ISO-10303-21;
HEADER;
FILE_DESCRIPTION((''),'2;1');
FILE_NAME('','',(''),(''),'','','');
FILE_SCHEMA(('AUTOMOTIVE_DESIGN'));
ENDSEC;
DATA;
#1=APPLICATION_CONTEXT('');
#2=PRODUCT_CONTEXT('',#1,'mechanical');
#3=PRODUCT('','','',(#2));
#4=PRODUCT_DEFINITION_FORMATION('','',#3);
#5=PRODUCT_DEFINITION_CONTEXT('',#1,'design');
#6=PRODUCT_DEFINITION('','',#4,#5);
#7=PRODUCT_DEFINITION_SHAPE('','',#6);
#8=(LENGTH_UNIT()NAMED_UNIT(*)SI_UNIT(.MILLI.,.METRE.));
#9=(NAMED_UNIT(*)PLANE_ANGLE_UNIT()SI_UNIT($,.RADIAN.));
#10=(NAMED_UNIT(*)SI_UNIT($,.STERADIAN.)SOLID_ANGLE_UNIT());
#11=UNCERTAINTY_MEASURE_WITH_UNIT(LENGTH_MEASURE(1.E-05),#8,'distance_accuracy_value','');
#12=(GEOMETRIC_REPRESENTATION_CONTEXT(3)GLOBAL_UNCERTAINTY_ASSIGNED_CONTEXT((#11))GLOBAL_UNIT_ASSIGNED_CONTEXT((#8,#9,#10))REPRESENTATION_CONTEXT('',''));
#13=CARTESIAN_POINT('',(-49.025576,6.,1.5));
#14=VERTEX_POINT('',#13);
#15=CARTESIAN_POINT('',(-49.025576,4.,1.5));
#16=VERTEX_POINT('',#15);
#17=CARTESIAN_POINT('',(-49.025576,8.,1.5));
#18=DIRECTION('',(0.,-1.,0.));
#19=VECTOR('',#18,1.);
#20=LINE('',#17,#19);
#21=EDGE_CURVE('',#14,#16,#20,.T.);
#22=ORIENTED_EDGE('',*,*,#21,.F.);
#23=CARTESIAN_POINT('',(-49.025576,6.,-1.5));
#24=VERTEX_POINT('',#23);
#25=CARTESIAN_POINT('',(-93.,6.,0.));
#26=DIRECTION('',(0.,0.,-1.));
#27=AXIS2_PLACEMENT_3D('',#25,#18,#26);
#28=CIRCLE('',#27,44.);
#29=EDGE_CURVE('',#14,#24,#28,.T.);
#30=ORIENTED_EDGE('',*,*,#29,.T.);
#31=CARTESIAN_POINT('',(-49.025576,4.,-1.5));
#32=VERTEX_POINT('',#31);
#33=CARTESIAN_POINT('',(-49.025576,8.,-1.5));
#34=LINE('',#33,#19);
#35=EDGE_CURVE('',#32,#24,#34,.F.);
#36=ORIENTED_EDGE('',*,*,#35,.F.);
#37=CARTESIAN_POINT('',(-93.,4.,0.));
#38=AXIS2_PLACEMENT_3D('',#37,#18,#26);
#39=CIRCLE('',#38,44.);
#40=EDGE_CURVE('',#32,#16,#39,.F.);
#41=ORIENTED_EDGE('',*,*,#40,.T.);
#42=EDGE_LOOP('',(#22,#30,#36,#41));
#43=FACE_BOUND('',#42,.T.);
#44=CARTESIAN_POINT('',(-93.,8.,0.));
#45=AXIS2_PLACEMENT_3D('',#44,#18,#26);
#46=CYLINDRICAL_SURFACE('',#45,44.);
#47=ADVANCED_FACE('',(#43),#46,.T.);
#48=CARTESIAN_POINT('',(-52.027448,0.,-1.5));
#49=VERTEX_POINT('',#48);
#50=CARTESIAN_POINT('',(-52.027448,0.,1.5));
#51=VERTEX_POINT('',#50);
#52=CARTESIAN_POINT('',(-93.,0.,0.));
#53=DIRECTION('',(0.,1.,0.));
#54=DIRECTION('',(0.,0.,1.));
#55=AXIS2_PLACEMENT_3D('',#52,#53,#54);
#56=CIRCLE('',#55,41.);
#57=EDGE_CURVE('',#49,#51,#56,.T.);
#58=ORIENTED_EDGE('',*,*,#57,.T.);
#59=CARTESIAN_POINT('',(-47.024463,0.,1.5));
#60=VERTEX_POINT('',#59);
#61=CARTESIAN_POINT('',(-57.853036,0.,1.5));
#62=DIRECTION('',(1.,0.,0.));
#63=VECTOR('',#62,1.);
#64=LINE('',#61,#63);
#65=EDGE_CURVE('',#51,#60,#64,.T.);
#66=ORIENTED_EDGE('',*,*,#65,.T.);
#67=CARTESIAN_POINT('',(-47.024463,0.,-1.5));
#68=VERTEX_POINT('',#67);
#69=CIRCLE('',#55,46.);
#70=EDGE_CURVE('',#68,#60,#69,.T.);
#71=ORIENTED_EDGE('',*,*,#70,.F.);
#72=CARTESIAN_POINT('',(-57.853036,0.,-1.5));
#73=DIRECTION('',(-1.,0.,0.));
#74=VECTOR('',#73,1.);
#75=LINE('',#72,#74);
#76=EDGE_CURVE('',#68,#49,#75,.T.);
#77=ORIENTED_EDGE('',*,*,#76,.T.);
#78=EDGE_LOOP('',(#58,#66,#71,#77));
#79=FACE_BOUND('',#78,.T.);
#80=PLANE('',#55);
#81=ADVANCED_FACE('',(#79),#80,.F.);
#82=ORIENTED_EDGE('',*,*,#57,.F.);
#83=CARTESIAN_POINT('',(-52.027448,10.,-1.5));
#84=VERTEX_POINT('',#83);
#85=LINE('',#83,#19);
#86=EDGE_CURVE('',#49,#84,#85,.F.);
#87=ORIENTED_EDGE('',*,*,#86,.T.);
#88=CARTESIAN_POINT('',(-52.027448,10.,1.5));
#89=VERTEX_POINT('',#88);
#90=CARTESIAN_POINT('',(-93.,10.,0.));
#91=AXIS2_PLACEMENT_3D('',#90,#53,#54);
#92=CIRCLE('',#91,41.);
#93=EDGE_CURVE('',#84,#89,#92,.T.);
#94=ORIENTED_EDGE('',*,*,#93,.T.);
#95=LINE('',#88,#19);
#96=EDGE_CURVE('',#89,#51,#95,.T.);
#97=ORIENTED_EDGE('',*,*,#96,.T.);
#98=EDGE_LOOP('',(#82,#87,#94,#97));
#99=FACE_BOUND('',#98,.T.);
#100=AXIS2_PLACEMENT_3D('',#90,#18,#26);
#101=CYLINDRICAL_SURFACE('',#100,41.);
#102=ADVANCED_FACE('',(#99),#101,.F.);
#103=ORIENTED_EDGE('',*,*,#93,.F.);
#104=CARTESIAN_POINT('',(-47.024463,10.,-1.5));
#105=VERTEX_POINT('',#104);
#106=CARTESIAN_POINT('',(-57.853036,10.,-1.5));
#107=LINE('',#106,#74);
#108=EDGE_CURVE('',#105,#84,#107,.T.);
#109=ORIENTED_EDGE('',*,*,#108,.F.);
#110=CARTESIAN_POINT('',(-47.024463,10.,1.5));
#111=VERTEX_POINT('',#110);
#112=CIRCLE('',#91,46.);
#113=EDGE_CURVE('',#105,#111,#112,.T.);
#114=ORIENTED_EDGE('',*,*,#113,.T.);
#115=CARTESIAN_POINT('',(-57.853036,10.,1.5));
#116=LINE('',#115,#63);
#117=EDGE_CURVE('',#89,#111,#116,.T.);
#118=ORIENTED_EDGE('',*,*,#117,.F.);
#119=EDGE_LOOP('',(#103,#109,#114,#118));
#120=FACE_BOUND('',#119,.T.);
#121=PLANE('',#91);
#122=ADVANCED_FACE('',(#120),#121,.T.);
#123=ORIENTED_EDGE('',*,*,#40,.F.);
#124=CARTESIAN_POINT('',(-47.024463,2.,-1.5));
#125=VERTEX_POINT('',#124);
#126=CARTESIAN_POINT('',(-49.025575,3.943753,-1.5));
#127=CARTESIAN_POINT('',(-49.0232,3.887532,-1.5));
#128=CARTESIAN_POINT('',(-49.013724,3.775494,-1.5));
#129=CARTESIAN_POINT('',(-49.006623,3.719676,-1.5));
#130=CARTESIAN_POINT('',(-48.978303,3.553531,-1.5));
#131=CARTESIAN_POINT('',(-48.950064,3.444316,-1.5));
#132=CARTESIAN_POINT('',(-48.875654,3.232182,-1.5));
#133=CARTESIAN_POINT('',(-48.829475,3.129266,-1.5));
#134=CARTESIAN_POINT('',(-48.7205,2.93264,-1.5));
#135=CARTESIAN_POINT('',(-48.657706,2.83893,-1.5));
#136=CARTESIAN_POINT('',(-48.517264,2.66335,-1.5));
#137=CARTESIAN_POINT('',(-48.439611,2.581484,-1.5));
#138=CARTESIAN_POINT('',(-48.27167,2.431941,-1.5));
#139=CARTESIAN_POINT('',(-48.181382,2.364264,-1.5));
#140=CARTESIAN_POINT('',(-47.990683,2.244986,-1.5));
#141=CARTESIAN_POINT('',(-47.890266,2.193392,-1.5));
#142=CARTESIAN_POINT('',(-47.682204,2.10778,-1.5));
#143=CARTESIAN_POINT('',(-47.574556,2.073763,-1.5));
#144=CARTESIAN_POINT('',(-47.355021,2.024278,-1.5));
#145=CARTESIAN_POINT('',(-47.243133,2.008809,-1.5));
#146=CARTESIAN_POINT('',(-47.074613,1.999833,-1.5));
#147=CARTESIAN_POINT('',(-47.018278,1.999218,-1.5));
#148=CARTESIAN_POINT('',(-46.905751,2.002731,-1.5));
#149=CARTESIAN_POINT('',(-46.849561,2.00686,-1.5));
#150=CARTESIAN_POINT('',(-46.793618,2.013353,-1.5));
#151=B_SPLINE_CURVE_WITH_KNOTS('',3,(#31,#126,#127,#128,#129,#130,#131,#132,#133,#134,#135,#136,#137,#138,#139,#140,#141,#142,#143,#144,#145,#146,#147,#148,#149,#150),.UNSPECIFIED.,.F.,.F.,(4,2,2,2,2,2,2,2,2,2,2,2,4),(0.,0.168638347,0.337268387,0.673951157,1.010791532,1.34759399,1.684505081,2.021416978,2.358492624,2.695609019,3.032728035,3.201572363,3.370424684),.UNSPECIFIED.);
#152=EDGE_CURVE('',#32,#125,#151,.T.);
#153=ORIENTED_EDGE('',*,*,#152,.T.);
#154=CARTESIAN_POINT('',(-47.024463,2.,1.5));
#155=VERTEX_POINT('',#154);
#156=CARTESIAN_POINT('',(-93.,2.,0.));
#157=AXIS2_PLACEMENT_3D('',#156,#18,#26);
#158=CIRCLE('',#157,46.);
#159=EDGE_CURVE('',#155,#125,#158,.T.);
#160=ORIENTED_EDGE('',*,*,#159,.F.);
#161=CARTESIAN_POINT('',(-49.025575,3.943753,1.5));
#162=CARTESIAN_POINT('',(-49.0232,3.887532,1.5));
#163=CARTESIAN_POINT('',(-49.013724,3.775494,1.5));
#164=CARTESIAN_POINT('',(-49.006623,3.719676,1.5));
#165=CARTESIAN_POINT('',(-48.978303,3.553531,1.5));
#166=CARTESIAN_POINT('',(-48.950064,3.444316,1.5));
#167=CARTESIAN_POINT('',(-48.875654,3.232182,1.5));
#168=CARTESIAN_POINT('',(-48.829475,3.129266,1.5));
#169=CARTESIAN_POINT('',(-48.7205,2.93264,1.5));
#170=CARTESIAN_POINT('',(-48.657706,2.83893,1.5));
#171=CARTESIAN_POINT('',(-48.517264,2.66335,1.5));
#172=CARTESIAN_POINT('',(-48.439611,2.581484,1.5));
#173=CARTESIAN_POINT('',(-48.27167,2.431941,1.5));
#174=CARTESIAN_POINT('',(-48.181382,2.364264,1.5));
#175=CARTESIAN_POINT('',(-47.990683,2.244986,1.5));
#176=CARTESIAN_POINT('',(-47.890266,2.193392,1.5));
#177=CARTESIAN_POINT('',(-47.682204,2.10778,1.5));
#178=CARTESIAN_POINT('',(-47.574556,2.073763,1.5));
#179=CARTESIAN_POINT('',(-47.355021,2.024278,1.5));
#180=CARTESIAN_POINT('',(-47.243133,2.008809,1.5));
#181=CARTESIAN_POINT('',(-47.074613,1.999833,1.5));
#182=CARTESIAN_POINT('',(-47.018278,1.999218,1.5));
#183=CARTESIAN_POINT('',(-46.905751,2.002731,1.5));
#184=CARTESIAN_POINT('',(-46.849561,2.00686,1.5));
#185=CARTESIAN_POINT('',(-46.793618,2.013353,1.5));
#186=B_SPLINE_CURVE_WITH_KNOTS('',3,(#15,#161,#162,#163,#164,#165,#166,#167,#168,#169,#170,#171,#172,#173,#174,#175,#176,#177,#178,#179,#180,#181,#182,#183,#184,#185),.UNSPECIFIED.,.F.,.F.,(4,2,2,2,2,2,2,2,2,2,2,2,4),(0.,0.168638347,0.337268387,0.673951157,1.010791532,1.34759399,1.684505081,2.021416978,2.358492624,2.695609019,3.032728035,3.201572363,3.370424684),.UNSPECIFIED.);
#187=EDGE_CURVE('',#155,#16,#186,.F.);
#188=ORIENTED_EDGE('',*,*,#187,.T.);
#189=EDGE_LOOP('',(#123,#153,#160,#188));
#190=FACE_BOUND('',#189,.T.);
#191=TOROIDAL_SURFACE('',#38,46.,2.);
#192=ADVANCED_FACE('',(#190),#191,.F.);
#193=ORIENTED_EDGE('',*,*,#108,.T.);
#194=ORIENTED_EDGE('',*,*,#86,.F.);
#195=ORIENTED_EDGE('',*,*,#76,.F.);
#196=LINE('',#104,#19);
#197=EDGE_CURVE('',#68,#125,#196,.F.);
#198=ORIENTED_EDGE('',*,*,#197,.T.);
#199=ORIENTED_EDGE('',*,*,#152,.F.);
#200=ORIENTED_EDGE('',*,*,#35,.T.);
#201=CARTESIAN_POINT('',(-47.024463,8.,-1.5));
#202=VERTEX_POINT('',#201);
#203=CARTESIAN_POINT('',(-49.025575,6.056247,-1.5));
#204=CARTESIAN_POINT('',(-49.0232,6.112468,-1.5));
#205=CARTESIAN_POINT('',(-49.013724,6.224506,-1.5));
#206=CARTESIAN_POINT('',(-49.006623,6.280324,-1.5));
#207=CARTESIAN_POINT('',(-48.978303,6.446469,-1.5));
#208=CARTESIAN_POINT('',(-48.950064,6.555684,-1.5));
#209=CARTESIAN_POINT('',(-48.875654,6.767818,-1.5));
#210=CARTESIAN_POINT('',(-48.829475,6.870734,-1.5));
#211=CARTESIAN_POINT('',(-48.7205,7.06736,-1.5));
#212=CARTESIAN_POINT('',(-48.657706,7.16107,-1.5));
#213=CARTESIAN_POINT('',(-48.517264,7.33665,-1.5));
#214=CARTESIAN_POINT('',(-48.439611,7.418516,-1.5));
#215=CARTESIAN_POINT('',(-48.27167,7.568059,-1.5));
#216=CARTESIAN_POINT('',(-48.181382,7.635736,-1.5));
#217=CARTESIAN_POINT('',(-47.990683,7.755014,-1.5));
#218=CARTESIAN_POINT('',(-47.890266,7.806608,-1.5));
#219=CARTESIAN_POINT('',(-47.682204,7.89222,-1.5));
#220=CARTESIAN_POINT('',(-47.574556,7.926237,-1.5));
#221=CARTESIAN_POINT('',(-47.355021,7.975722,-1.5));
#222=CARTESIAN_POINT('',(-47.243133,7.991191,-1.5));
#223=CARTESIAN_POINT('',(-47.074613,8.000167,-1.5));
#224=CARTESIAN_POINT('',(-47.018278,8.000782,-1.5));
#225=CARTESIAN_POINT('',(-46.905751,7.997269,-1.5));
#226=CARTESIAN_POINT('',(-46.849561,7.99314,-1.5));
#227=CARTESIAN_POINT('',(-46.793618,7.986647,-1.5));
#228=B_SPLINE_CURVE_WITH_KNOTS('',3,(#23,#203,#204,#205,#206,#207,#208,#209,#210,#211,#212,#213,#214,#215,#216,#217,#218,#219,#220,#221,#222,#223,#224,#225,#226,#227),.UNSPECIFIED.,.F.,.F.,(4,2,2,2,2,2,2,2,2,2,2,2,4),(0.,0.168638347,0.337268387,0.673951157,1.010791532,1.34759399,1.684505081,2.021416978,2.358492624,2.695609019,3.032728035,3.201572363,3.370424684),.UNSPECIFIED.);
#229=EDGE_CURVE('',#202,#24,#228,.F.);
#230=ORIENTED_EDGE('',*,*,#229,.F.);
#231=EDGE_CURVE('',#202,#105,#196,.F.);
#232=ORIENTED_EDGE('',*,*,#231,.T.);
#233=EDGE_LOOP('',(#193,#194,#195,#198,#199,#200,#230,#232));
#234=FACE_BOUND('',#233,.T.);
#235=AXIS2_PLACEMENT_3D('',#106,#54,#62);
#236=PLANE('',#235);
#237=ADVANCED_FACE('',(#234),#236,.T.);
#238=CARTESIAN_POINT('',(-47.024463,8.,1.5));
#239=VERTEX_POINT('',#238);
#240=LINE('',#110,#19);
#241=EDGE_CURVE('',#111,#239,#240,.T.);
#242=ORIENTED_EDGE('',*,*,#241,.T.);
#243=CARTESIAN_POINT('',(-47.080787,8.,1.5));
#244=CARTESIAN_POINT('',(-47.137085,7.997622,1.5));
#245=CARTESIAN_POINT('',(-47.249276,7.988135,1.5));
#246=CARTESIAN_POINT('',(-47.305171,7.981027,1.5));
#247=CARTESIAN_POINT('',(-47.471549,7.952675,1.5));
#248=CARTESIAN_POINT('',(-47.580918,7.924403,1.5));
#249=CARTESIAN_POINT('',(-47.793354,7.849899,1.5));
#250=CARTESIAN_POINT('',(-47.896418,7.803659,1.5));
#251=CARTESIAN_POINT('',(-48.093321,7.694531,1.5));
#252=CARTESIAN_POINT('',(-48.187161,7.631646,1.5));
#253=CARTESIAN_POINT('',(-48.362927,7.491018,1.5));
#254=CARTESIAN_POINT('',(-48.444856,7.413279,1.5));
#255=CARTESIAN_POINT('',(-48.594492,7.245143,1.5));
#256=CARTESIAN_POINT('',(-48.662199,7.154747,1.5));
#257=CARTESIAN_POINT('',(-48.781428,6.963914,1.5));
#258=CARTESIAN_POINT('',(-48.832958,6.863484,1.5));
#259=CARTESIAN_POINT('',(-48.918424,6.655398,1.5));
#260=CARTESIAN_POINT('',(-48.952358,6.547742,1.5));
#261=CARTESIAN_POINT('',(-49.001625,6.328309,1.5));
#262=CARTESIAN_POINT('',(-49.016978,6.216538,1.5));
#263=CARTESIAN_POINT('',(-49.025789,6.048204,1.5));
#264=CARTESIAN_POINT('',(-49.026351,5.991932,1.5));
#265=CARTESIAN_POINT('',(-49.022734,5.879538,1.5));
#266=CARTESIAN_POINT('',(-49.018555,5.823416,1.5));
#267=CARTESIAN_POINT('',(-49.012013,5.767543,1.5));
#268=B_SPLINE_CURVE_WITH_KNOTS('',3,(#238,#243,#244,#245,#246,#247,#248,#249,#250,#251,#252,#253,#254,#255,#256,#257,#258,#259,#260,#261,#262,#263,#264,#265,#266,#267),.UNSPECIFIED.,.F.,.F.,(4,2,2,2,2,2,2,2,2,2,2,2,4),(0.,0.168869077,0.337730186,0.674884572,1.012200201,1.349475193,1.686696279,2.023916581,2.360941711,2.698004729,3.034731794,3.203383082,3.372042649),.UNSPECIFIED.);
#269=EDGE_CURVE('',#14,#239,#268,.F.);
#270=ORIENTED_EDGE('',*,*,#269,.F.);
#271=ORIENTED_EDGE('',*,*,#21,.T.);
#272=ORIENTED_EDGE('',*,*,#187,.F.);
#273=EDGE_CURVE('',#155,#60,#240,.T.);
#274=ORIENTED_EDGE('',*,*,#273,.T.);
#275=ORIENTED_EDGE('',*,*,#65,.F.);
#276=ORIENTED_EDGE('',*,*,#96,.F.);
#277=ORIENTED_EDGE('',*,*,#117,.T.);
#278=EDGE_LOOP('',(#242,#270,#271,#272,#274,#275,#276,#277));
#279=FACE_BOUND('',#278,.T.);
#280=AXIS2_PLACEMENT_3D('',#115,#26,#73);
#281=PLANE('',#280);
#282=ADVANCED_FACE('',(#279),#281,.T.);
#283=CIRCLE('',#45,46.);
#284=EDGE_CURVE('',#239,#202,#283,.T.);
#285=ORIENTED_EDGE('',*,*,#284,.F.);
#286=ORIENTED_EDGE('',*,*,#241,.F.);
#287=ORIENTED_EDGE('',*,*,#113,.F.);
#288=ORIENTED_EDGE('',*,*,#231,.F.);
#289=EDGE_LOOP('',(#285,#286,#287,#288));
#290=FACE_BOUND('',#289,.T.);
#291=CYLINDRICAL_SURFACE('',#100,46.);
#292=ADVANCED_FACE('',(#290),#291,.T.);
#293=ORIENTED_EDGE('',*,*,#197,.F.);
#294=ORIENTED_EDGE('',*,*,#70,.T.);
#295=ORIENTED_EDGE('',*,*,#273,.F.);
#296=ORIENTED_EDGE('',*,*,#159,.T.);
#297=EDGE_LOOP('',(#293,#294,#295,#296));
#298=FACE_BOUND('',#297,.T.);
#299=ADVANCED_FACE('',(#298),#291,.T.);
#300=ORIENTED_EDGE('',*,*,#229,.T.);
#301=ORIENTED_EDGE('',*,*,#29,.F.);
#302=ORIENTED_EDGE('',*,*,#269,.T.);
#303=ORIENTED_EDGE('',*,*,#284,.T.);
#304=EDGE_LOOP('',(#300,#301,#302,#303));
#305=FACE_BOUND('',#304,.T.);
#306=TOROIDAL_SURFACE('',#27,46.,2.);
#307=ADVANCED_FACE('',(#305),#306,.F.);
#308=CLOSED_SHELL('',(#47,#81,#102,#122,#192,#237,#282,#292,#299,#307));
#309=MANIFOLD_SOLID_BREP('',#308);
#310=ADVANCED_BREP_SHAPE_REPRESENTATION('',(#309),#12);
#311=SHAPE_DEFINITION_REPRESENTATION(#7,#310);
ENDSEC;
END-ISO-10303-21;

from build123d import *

# Parameters (mm, degrees)
SKETCH1_R           = 46
SKETCH1_R_2         = 41
BOSS_EXTRUDE1_DEPTH = 10
SKETCH2_W           = 13.706072516
SKETCH2_H           = 3
CUT_EXTRUDE2_DEPTH  = 147.754897704
SKETCH3_R           = 47
SKETCH3_R_2         = 44
CUT_EXTRUDE3_DEPTH  = 6
FILLET1_R           = 2
FILLET2_R           = 2


with BuildPart() as part:
    # Sketch1 → Boss-Extrude1 (new body)
    with BuildSketch(Plane(origin=(0, 0, 0), x_dir=(1, 0, 0), z_dir=(0, 1, 0))):
        with Locations(Location((-93, 0, 0), (0, 0, 270))):
            Circle(SKETCH1_R)
        with Locations(Location((-93, 0, 0), (0, 0, 270))):
            Circle(SKETCH1_R_2, mode=Mode.SUBTRACT)
    extrude(amount=BOSS_EXTRUDE1_DEPTH)

    # Sketch2 → Cut-Extrude2 (cut, through all)
    with BuildSketch(Plane(origin=(0, 0, 0), x_dir=(1, 0, 0), z_dir=(0, 1, 0))):
        with Locations((-51, 0)):
            Rectangle(SKETCH2_W, SKETCH2_H)
    extrude(amount=CUT_EXTRUDE2_DEPTH, mode=Mode.SUBTRACT)

    # Sketch3 → Cut-Extrude3 (cut)
    with BuildSketch(Plane(origin=(0, 2, 0), x_dir=(-1, 0, 0), z_dir=(0, -1, 0))):
        with Locations((93, 0)):
            Circle(SKETCH3_R)
        with Locations((93, 0)):
            Circle(SKETCH3_R_2, mode=Mode.SUBTRACT)
    extrude(amount=-CUT_EXTRUDE3_DEPTH, mode=Mode.SUBTRACT)

    # Fillet1
    fillet1_edges = [part.edges().sort_by_distance(p)[0] for p in [
        (-93.750109011, 8, 43.993605632),
    ]]
    fillet(fillet1_edges, radius=FILLET1_R - 0.0001)  # a hair under: the kernel refuses the full size

    # Fillet2
    fillet2_edges = [part.edges().sort_by_distance(p)[0] for p in [
        (-93.750109011, 2, 43.993605632),
    ]]
    fillet(fillet2_edges, radius=FILLET2_R - 0.0001)  # a hair under: the kernel refuses the full size


solid = part.part
